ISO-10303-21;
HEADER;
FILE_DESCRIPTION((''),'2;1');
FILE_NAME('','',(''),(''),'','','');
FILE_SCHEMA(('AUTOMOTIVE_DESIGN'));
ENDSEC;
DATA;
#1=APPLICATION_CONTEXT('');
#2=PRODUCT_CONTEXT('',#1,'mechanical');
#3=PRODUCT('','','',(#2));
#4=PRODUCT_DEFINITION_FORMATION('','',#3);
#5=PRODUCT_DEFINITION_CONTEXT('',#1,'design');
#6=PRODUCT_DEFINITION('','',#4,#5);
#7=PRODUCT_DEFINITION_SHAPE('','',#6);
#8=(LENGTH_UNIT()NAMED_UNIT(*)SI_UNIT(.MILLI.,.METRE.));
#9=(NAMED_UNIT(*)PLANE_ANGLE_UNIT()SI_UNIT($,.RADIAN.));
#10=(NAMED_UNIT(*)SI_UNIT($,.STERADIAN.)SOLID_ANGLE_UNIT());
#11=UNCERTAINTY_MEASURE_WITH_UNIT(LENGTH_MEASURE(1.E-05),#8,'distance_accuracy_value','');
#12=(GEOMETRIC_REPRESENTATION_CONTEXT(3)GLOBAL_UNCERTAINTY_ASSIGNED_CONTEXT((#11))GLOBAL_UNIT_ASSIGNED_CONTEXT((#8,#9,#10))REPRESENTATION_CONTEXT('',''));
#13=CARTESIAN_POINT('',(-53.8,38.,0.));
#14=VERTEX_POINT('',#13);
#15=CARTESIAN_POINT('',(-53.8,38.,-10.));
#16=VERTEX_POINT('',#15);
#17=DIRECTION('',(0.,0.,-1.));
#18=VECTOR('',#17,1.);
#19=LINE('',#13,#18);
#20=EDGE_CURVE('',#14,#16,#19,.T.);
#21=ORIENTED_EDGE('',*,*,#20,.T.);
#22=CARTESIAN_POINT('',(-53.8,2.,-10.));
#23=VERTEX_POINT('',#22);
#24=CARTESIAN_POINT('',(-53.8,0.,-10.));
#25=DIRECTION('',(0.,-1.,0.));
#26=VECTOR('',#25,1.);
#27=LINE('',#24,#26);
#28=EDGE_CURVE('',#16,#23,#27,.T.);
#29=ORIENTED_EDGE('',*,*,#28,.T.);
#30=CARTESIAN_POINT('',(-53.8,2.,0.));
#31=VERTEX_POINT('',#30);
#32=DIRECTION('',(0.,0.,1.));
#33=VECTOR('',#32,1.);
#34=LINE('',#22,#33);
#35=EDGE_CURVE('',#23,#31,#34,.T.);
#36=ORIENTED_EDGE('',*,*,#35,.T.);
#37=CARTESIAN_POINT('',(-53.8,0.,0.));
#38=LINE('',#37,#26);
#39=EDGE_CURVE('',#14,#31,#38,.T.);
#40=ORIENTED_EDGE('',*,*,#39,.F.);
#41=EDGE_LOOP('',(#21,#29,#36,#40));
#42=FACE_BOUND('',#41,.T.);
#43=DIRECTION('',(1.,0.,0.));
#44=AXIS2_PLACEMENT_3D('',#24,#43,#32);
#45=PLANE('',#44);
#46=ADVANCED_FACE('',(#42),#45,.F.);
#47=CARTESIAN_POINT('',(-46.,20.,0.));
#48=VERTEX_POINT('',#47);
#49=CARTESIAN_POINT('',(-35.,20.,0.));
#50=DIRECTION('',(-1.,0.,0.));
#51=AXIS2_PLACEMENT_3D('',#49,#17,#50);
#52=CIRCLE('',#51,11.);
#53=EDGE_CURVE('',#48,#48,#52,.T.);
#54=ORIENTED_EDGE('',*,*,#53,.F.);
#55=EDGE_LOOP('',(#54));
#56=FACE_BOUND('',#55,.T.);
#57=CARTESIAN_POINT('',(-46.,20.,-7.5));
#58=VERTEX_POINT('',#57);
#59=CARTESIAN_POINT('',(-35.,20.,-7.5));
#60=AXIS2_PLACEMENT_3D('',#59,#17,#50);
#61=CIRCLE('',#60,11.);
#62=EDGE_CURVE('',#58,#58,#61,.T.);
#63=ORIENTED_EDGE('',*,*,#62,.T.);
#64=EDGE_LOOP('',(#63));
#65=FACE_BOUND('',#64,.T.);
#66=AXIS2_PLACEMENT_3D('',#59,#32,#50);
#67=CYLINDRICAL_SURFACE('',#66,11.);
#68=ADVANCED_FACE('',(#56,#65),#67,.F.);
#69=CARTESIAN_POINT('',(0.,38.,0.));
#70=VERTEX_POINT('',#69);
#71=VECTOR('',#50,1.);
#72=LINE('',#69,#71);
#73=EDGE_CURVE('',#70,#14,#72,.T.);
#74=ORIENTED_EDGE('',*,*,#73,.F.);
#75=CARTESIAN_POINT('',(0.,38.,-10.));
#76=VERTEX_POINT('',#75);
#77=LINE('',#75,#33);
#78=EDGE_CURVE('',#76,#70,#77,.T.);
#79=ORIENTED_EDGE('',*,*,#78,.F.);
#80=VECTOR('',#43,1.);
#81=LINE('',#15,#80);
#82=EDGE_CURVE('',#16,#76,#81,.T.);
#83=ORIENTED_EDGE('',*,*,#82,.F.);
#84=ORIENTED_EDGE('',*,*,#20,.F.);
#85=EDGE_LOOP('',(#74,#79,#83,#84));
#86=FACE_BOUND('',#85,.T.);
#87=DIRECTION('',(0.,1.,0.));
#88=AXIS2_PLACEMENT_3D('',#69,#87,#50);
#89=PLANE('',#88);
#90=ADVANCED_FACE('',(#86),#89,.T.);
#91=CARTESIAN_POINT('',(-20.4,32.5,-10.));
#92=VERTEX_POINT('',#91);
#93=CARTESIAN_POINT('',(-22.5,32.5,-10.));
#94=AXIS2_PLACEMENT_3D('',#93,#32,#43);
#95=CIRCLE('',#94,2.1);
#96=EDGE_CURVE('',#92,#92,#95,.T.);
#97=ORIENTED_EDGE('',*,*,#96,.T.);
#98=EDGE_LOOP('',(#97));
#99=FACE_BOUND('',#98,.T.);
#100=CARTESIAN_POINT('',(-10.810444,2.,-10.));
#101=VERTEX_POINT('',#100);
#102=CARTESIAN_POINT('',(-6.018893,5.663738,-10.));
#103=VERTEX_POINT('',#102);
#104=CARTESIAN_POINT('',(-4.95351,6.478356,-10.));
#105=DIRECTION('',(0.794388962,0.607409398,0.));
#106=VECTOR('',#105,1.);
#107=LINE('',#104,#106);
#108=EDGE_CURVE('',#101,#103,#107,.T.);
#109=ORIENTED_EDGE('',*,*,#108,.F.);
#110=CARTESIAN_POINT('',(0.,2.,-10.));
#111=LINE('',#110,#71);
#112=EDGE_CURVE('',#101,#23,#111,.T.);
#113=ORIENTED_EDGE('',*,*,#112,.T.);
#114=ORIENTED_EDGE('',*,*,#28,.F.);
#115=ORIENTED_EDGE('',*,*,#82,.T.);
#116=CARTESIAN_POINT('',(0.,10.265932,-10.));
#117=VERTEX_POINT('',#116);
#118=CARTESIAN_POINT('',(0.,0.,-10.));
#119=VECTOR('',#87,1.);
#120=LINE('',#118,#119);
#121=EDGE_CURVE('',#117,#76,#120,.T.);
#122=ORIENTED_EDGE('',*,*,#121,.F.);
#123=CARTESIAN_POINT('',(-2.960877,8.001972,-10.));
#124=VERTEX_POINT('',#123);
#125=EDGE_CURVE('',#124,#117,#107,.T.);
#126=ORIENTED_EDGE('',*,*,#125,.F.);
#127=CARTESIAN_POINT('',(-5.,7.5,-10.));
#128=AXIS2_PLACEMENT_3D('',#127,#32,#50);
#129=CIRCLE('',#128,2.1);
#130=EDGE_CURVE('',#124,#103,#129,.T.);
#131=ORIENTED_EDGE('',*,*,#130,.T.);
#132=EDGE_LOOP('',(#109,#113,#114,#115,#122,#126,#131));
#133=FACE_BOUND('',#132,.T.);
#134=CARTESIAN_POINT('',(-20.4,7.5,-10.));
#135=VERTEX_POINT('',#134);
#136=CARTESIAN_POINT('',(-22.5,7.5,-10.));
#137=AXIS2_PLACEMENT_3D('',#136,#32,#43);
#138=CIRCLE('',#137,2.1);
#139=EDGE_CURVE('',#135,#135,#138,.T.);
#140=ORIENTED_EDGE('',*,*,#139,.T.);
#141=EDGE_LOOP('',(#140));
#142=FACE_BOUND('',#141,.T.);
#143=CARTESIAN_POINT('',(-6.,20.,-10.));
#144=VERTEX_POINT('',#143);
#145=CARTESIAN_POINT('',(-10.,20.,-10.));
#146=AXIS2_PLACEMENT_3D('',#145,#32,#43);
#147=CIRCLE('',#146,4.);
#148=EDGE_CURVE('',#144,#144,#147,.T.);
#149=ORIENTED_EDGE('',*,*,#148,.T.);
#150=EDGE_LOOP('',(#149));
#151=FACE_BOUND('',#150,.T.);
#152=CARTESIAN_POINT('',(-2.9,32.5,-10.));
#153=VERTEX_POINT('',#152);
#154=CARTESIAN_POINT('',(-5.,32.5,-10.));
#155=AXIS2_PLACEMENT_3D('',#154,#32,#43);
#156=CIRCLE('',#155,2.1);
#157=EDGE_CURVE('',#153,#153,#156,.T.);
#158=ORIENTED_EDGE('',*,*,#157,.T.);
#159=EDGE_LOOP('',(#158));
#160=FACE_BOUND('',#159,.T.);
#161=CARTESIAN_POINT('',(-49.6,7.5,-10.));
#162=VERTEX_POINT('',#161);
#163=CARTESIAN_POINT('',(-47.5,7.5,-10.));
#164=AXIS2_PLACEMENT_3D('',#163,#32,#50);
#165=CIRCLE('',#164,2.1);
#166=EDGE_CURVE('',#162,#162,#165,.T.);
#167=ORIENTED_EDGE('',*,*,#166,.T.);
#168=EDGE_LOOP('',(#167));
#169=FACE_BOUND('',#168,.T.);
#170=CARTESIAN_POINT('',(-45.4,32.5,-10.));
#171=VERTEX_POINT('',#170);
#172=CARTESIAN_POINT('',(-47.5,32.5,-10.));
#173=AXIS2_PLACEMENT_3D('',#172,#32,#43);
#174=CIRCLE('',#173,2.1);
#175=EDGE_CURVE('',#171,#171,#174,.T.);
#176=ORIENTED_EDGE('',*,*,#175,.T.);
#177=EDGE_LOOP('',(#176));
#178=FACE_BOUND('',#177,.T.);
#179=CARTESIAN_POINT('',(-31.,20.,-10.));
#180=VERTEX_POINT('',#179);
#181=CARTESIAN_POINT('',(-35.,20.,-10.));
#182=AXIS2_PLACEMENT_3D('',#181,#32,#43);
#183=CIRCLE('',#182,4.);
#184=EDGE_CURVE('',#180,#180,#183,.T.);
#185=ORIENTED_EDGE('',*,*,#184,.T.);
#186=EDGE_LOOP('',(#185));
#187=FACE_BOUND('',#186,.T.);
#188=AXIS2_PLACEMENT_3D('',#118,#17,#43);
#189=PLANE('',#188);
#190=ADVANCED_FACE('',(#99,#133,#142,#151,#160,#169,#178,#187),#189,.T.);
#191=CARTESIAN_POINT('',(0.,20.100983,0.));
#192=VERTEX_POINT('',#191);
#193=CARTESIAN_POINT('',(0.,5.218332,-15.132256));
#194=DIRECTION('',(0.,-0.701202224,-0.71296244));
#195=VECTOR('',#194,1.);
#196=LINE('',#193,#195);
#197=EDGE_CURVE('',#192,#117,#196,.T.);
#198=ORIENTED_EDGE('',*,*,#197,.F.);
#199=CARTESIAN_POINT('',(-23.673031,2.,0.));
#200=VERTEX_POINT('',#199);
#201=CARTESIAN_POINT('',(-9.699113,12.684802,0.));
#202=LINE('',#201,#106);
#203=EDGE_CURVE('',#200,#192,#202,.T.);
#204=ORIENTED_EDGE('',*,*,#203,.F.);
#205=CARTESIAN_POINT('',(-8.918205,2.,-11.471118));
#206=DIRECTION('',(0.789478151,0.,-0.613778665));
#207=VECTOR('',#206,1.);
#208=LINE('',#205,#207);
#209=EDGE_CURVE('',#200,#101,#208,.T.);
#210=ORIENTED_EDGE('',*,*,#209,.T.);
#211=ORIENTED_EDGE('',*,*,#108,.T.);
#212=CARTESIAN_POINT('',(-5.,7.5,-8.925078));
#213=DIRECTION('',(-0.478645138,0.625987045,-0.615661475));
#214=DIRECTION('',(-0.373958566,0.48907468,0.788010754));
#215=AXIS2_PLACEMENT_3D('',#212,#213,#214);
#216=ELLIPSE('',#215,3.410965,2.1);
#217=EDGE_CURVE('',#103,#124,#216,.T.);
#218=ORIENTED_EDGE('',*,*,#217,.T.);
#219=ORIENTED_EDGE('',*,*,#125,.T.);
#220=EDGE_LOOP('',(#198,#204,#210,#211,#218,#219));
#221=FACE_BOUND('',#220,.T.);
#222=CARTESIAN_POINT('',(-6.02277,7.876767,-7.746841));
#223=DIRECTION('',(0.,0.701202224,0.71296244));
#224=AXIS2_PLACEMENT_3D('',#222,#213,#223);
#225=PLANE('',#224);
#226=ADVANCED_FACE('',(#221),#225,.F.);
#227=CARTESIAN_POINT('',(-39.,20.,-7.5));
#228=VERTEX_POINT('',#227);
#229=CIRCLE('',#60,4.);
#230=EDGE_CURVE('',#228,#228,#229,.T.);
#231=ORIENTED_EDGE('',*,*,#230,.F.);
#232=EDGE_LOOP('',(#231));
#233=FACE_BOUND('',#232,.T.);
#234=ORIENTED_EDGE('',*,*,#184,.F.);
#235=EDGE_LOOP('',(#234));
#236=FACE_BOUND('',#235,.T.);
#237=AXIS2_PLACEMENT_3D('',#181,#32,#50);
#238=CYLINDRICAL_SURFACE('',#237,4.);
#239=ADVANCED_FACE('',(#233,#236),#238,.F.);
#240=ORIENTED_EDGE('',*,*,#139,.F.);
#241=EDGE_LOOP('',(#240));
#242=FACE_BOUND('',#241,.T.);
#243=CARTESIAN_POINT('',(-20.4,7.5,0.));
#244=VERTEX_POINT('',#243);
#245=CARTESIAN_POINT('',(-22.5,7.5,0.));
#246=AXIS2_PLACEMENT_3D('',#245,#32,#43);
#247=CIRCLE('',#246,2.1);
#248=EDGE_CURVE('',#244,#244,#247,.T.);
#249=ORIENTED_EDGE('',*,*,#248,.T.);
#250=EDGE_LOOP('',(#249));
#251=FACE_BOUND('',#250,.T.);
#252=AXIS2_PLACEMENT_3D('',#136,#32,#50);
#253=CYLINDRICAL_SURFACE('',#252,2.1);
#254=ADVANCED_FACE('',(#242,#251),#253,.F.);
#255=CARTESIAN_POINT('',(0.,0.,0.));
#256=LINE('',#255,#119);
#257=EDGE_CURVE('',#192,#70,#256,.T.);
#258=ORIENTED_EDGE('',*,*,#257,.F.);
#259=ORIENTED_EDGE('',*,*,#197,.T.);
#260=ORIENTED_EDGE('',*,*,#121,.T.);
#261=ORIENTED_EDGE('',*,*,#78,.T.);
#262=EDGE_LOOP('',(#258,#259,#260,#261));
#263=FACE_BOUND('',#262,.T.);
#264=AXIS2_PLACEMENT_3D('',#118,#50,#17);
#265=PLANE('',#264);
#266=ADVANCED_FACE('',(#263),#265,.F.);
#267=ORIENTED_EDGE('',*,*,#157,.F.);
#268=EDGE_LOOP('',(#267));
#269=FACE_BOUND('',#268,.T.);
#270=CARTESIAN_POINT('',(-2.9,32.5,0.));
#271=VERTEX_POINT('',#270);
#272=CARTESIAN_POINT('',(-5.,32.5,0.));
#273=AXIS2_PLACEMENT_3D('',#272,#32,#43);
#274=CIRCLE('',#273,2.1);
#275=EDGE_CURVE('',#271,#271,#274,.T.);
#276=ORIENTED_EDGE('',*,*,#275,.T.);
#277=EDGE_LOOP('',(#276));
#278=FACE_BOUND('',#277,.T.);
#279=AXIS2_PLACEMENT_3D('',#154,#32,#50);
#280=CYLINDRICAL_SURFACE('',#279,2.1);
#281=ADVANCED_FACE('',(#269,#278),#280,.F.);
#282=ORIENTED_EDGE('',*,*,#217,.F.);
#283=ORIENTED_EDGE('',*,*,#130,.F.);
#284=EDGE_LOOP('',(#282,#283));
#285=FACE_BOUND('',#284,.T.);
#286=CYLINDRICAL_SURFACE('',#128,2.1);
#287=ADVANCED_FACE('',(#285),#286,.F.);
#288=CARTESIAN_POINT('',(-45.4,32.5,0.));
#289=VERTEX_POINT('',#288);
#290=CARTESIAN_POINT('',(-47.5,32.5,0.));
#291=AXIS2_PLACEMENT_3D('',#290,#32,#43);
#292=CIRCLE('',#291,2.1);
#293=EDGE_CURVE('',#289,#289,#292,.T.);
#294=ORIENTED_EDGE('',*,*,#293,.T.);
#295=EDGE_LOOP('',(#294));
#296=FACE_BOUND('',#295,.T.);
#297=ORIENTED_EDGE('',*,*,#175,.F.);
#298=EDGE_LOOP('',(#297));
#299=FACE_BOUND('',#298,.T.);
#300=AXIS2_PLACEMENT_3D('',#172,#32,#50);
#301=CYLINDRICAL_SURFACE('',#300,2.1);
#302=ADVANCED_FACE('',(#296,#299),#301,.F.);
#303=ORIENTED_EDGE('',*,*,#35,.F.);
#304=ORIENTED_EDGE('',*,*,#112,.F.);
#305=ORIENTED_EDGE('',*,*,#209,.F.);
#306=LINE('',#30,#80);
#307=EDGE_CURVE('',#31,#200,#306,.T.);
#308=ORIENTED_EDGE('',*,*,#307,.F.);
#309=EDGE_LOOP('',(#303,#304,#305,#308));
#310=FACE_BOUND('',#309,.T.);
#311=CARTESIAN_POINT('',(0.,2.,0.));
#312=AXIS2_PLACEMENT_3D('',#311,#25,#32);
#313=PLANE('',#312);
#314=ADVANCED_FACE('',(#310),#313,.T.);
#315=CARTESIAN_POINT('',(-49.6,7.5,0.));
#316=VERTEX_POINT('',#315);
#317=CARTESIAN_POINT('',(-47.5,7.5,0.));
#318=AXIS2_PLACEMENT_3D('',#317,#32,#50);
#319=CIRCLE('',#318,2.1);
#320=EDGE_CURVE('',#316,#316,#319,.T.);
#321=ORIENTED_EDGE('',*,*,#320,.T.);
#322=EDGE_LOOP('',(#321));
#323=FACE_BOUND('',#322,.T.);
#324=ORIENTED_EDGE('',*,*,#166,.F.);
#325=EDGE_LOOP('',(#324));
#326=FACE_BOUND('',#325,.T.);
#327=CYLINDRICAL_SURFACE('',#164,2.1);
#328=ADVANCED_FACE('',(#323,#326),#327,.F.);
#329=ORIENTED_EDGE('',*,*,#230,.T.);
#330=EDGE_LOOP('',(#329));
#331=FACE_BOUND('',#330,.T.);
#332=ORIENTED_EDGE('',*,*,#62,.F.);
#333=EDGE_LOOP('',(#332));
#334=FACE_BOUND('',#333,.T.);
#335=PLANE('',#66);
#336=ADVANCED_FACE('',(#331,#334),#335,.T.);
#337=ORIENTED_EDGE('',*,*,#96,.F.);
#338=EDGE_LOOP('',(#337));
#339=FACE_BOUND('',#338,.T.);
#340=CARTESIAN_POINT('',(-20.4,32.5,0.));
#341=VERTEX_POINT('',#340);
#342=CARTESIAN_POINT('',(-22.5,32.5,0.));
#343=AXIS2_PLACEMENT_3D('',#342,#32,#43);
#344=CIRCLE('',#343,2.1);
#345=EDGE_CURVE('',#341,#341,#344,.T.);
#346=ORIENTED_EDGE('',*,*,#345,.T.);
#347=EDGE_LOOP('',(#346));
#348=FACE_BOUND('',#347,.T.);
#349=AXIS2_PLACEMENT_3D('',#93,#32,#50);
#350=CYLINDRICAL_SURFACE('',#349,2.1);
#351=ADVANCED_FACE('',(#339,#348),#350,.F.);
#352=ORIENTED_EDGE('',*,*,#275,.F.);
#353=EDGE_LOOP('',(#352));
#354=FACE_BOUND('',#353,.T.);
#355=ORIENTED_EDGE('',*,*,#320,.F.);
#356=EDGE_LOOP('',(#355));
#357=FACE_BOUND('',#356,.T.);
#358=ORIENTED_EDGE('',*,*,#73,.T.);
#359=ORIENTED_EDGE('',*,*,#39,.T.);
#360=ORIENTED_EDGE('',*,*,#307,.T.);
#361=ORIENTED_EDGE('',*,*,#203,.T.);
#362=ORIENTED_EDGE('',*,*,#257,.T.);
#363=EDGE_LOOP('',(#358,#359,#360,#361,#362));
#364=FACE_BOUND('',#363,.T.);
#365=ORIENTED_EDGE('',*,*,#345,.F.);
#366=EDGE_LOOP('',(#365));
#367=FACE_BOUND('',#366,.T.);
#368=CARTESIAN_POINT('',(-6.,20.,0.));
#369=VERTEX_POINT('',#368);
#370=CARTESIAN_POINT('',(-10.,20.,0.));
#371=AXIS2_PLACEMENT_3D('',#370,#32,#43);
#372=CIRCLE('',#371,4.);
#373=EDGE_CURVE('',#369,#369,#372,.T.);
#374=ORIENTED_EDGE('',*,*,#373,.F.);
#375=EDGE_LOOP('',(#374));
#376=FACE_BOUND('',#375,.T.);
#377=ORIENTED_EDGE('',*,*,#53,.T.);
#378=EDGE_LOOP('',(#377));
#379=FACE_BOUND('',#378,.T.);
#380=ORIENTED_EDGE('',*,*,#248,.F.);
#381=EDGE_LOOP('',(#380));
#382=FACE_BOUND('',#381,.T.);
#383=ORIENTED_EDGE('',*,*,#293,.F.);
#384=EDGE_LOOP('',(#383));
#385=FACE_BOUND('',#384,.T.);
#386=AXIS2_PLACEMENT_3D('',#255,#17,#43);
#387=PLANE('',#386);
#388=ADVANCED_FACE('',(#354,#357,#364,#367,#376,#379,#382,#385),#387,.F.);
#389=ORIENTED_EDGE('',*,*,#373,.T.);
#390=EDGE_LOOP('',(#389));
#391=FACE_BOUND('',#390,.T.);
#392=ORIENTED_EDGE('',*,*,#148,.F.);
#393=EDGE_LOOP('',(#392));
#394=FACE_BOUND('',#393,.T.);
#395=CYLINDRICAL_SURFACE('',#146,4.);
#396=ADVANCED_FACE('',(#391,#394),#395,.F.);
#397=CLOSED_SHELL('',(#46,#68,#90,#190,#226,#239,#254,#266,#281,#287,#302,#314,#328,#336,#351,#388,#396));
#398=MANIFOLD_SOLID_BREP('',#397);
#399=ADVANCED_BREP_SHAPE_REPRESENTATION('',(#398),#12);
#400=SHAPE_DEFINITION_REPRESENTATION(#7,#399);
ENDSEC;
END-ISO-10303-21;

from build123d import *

# Parameters (mm, degrees)
JOTYY_MIRRORED_START         = -10
JOTYY_MIRRORED_OUTLINE_W     = 53.8
JOTYY_MIRRORED_OUTLINE_H     = 36
JOTYY_MIRRORED_OUTLINE_R     = 2.1
JOTYY_MIRRORED_OUTLINE_R_2   = 11
JOTYY_MIRRORED_DEPTH         = 10
JOTYY_MIRRORED_2_OUTLINE_R   = 11
JOTYY_MIRRORED_2_OUTLINE_R_2 = 4
JOTYY_MIRRORED_2_DEPTH       = 2.5
SKETCH1_R                    = 4
CUT_EXTRUDE1_DEPTH           = 10
CUT_EXTRUDE2_DEPTH           = 58.009529002


# Read off the part's stored shape, not the designer's step: jotyy_Mirrored
with BuildPart() as part:
    # jotyy_Mirrored outline → jotyy_Mirrored (new body)
    with BuildSketch(Plane.XY.offset(JOTYY_MIRRORED_START)):
        with Locations((-26.9, 20)):
            Rectangle(JOTYY_MIRRORED_OUTLINE_W, JOTYY_MIRRORED_OUTLINE_H)
        with Locations((-47.5, 7.5)):
            Circle(JOTYY_MIRRORED_OUTLINE_R, mode=Mode.SUBTRACT)
        with Locations((-22.5, 7.5)):
            Circle(JOTYY_MIRRORED_OUTLINE_R, mode=Mode.SUBTRACT)
        with Locations((-5, 7.5)):
            Circle(JOTYY_MIRRORED_OUTLINE_R, mode=Mode.SUBTRACT)
        with Locations((-35, 20)):
            Circle(JOTYY_MIRRORED_OUTLINE_R_2, mode=Mode.SUBTRACT)
        with Locations((-47.5, 32.5)):
            Circle(JOTYY_MIRRORED_OUTLINE_R, mode=Mode.SUBTRACT)
        with Locations((-22.5, 32.5)):
            Circle(JOTYY_MIRRORED_OUTLINE_R, mode=Mode.SUBTRACT)
        with Locations((-5, 32.5)):
            Circle(JOTYY_MIRRORED_OUTLINE_R, mode=Mode.SUBTRACT)
    extrude(amount=JOTYY_MIRRORED_DEPTH)

    # jotyy_Mirrored 2 outline → jotyy_Mirrored 2 (add)
    with BuildSketch(Plane.XY.offset(JOTYY_MIRRORED_START)):
        with Locations((-35, 20)):
            Circle(JOTYY_MIRRORED_2_OUTLINE_R)
        with Locations((-35, 20)):
            Circle(JOTYY_MIRRORED_2_OUTLINE_R_2, mode=Mode.SUBTRACT)
    extrude(amount=JOTYY_MIRRORED_2_DEPTH)

    # Sketch1 → Cut-Extrude1 (cut)
    with BuildSketch(Plane.XY):
        with Locations((-10, 20)):
            Circle(SKETCH1_R)
    extrude(amount=-CUT_EXTRUDE1_DEPTH, mode=Mode.SUBTRACT)

    # Sketch4 → Cut-Extrude2 (cut, through all)
    with BuildSketch(Plane(origin=(-6.022770261, 7.876766856, -7.746840682), x_dir=(-0.8770067574433524, -0.3073815854436153, 0.36929081809444725), z_dir=(-0.4786451376421942, 0.6259870446034146, -0.6156614753256595))):
        Polygon((61.660399682, 43.281573414), (-67.322963421, -199.854992021), (-184.813959978, -137.526300969), (-55.830596875, 105.610264465), align=None)
    extrude(amount=-CUT_EXTRUDE2_DEPTH, mode=Mode.SUBTRACT)


solid = part.part
